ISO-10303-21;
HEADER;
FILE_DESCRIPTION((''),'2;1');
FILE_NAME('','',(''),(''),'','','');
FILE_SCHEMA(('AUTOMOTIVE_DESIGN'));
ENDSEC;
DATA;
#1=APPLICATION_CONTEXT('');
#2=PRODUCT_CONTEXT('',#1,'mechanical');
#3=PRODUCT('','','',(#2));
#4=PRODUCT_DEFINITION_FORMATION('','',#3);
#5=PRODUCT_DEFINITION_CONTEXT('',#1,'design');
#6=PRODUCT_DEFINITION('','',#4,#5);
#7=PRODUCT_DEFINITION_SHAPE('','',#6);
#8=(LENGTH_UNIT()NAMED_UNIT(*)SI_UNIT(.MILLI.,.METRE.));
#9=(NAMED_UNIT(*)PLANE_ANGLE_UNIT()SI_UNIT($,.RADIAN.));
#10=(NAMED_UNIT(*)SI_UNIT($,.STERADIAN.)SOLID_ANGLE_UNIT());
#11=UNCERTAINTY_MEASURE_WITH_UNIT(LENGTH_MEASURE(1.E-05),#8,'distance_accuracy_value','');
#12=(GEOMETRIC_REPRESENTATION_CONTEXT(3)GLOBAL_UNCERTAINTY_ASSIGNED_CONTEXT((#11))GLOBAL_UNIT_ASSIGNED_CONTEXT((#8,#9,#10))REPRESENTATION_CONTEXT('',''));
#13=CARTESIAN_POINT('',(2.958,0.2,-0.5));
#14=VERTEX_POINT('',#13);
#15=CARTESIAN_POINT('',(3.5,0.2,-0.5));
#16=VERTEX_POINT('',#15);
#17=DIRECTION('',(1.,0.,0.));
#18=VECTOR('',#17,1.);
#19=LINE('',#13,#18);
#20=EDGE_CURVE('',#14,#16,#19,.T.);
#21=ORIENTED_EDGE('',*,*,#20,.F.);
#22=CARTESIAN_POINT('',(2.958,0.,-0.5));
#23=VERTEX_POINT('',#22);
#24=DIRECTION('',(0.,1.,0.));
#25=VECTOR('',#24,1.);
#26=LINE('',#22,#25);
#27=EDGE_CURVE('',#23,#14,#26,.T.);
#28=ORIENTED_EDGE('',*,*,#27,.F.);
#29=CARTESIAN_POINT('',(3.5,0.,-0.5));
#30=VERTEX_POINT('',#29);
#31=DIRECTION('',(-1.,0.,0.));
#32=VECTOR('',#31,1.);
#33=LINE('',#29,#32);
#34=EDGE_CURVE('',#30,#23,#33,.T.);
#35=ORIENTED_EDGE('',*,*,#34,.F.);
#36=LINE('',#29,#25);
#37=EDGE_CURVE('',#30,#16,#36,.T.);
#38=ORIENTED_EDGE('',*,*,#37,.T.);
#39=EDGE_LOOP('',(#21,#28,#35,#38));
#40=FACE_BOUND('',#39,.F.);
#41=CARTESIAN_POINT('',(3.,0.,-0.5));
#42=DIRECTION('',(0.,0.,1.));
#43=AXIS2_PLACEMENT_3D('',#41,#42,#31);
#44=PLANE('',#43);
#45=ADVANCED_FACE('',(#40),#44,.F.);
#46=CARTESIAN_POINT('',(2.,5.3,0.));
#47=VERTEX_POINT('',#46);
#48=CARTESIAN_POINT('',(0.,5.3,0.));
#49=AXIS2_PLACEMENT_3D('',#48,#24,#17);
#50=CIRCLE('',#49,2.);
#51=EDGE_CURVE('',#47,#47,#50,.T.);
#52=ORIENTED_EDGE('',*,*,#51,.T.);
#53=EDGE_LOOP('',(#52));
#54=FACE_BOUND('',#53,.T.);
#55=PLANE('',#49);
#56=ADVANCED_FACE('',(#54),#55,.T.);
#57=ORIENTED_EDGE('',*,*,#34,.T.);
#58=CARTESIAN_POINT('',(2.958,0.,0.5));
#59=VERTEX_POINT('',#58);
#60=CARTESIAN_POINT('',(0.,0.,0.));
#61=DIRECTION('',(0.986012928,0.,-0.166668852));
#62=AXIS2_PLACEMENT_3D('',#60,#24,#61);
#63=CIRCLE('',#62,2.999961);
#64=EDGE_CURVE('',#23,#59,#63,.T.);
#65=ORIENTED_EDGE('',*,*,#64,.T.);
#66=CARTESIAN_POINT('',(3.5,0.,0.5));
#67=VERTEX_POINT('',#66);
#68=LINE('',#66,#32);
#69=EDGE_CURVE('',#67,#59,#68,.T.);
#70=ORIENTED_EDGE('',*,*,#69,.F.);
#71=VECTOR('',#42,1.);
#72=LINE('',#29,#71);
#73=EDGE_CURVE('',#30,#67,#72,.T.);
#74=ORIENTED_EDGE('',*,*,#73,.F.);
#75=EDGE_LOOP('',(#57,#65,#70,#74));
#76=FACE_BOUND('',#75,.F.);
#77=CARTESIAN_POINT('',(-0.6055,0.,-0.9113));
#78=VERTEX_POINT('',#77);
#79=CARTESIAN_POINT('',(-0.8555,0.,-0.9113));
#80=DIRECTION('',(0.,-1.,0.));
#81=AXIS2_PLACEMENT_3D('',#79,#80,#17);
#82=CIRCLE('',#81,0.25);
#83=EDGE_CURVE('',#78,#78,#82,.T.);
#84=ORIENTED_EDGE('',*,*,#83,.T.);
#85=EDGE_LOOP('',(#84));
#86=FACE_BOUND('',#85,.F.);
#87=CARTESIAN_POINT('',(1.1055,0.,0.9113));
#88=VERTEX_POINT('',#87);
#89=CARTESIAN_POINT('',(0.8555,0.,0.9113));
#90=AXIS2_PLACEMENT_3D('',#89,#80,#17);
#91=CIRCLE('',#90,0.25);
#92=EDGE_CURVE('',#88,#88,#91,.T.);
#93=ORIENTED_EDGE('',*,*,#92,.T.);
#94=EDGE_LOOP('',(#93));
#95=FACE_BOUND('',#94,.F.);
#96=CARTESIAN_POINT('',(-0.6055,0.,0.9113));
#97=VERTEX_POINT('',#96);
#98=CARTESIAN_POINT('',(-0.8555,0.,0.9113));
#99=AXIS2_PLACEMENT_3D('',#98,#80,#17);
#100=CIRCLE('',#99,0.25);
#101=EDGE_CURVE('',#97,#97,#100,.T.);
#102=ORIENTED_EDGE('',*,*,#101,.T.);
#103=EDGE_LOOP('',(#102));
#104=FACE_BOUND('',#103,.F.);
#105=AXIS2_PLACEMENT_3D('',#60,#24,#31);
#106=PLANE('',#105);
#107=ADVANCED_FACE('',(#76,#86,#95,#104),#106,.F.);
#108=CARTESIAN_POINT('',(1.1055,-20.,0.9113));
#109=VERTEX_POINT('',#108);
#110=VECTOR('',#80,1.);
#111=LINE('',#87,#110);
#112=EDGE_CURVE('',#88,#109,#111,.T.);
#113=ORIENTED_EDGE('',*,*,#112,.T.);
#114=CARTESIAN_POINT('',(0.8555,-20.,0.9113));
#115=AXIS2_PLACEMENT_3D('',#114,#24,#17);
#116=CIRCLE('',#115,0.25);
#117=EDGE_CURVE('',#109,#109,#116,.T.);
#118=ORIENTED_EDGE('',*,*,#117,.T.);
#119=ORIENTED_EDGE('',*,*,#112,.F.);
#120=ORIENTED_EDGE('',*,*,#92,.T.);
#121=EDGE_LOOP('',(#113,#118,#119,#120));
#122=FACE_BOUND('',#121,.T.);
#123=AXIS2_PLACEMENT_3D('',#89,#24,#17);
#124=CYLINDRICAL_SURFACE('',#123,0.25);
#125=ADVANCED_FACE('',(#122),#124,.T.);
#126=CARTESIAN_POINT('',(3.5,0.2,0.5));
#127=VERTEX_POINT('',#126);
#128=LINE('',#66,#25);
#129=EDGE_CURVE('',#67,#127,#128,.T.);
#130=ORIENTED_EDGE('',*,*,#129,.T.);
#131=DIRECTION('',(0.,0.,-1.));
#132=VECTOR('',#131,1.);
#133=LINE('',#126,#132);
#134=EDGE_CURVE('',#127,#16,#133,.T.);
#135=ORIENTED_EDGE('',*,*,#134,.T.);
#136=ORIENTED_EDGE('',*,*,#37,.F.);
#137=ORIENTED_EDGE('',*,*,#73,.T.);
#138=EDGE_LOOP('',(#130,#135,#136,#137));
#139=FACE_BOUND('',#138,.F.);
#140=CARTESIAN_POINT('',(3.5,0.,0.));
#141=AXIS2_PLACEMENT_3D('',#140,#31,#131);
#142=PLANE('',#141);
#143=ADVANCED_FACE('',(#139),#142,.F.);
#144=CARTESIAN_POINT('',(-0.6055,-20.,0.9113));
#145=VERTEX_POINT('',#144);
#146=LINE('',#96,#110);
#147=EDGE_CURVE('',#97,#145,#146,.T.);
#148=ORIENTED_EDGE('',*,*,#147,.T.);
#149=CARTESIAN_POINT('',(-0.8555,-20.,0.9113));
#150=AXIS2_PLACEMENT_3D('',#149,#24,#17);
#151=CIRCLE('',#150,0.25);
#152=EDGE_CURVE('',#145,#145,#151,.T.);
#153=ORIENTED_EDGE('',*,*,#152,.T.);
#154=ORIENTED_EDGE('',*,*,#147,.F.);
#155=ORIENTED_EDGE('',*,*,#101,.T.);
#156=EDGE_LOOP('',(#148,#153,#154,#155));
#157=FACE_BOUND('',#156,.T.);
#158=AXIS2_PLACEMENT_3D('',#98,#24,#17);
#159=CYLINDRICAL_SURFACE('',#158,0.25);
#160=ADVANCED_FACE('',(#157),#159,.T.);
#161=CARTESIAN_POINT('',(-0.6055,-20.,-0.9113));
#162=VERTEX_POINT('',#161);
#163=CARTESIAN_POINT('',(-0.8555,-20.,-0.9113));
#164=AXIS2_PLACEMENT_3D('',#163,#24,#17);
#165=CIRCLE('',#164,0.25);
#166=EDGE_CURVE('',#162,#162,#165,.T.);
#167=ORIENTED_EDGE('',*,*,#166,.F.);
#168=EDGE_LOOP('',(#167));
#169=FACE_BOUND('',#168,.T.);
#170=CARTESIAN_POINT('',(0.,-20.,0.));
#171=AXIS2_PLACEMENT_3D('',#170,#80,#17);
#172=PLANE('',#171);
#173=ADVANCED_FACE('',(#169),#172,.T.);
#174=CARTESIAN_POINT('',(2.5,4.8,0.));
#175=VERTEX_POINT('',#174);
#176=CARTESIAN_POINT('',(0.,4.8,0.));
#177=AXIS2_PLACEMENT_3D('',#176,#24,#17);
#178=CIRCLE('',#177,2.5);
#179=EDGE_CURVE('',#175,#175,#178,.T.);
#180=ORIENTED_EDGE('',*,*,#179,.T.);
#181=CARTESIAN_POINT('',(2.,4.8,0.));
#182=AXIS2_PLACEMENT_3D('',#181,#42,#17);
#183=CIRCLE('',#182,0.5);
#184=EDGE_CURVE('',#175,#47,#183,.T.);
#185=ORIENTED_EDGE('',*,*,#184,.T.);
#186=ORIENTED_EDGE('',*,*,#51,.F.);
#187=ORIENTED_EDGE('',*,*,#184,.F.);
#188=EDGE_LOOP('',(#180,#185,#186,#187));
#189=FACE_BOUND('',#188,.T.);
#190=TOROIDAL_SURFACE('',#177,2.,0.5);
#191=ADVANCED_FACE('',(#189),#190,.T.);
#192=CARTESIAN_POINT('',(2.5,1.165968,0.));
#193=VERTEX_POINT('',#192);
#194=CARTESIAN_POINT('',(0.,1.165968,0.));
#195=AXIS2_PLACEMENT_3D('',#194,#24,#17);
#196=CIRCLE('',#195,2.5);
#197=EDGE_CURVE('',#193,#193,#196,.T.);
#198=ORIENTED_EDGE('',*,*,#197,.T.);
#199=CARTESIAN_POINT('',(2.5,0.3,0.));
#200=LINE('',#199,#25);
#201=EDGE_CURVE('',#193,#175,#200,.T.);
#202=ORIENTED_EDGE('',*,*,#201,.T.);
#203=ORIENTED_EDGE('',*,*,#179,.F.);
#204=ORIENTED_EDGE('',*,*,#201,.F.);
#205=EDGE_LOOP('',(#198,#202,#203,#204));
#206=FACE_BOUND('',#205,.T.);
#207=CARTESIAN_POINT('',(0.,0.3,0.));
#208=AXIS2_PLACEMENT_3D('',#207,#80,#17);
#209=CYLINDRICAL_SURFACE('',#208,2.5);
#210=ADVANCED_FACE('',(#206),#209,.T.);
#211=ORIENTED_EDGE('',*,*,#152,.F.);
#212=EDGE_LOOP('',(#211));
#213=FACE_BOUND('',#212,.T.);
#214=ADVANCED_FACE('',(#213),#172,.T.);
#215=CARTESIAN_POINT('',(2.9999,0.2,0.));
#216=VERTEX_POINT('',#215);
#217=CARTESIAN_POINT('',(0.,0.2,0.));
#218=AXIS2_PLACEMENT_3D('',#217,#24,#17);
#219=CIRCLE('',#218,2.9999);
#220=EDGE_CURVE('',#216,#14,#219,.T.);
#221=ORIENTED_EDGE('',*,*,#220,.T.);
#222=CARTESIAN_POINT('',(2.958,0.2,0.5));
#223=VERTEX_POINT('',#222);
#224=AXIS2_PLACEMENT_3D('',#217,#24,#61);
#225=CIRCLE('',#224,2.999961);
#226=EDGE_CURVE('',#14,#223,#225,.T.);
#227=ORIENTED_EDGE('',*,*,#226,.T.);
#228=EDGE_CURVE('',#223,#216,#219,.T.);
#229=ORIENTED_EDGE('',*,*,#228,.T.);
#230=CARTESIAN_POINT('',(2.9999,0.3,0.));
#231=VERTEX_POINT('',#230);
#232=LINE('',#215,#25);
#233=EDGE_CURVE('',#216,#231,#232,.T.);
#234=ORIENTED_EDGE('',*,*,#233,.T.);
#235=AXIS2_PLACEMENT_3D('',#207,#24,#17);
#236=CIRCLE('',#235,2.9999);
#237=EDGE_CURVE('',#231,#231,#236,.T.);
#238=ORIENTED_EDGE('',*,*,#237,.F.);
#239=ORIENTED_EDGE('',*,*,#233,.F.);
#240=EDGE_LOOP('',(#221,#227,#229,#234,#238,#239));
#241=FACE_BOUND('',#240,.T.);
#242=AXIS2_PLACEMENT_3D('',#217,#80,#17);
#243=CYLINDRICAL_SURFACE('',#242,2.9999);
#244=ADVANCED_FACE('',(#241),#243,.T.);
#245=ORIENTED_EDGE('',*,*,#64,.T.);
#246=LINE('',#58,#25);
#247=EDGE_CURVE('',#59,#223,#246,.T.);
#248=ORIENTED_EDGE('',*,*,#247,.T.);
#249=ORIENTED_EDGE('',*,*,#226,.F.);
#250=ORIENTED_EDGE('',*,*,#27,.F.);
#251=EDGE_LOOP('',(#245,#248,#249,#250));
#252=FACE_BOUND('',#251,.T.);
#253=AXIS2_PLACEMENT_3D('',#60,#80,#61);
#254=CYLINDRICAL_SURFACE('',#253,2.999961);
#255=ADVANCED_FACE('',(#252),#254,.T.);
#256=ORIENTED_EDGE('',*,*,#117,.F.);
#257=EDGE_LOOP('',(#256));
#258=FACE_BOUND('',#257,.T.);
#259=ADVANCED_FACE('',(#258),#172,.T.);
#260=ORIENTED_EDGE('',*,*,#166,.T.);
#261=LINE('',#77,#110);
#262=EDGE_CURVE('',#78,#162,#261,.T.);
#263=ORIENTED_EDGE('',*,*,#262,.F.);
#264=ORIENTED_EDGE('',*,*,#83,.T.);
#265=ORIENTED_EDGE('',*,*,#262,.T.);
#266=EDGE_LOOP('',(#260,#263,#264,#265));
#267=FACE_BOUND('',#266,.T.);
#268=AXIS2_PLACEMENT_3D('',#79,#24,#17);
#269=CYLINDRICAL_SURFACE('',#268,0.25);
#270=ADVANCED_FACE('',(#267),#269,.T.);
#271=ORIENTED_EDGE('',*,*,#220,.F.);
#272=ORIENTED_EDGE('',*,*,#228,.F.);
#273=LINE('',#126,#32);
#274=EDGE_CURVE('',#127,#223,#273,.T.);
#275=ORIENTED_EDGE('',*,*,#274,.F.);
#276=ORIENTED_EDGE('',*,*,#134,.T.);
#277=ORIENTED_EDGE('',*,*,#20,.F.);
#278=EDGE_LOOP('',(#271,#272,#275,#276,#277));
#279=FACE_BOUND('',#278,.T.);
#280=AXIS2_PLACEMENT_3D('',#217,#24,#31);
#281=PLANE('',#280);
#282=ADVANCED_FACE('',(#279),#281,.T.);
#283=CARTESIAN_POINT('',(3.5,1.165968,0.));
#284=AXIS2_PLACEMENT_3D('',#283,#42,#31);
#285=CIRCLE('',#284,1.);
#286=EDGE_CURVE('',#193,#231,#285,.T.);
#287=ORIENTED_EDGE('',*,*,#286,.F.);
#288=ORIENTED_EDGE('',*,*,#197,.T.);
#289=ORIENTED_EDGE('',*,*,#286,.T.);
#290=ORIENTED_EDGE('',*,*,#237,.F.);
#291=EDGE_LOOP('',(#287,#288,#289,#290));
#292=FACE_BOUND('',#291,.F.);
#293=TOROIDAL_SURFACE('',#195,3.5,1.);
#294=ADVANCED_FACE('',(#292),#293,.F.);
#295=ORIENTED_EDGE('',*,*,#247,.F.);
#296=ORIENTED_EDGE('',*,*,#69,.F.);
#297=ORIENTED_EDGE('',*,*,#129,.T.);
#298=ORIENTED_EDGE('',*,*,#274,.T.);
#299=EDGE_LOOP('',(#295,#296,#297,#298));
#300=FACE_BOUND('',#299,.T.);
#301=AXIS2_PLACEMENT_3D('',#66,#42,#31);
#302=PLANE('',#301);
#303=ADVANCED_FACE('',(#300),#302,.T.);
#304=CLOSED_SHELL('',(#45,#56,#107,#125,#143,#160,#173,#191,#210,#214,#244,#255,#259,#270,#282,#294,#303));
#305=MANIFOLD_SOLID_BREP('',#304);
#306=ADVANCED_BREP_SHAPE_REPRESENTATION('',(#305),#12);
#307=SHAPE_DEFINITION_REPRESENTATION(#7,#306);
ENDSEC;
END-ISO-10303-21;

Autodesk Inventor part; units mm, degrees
ref_plane "YZ Plane" through (0, 0, 0) normal (1, 0, 0) x (0, 1, 0)
ref_plane "XZ Plane" through (0, 0, 0) normal (0, 1, 0) x (-1, 0, 0)
ref_plane "XY Plane" through (0, 0, 0) normal (0, 0, 1) x (1, 0, 0)
sketch "Sketch1" plane through (0, 0, 0) normal (0, 1, 0) x (-1, 0, 0)
  arc A0 (-2.958, -0.5) -> (-2.958, 0.5) centre (0, 0) ccw
  line L0 (-3.5, 0) -> (-3.5, -0.5)
  line L1 (-3.5, -0.5) -> (-3, -0.5)
  line L2 (-3, -0.5) -> (-2.958, -0.5)
  line L3 (-3.5, 0) -> (-3.5, 0.5)
  line L4 (-3.5, 0.5) -> (-2.958, 0.5)
  dimension "d0" = 6
  dimension "d1" = 0.5
  dimension "d2" = 0.5
  dimension "d3" = 0.5
extrude "Extrusion1" add sketch "Sketch1" along normal blind 0.2
sketch "Sketch2" plane through (0, 0.2, 0) normal (0, 1, 0) x (1, 0, 0)
  circle A0 centre (0, 0) radius 2.9999
extrude "Extrusion2" add sketch "Sketch2" along normal blind 0.1
sketch "Sketch3" plane through (0, 0.3, 0) normal (0, 1, 0) x (1, 0, 0)
  circle A0 centre (0, 0) radius 2.5
  dimension "d8" = 5
extrude "Extrusion3" add sketch "Sketch3" along normal blind 5
fillet "Fillet1" radius 0.5 1 edges at (-2.5, 5.3, 0)
fillet "Fillet2" radius 1 1 edges at (-2.5, 0.3, 0)
sketch "Sketch4" plane through (0, 0, 0) normal (0, -1, 0) x (1, 0, 0)
  circle A0 centre (0, 0) radius 1.25
  circle A1 centre (0.8555, -0.9113) radius 0.25
  circle A2 centre (0.8555, 0.9113) radius 0.25
  circle A3 centre (-0.8555, -0.9113) radius 0.25
  circle A4 centre (-0.8555, 0.9113) radius 0.25
  dimension "d13" = 2.5
  dimension "d14" = 0.5
  dimension "d16" = 0.5
  dimension "d17" = 0.5
  dimension "d18" = 0.5
extrude "Extrusion4" add sketch "Sketch4" along normal blind 20 contours A2 A0 | A0 A2 | A4 A0 | A0 A4 | A3 A0 | A0 A3
equation "\"BendRadius\" = Thickness"
equation "\"BendReliefWidth\" = Thickness"
equation "\"BendReliefDepth\" = 0.5 * Thickness"
equation "\"CornerReliefSize\" = 4 * Thickness"
equation "\"MinimumRemnant\" = 2 * Thickness"
equation "\"TransitionRadius\" = BendRadius"
equation "\"JacobiRadiusSize\" = BendRadius"
equation "\"GapSize\" = Thickness"
equation "\"Thickness\" = 3.048"
